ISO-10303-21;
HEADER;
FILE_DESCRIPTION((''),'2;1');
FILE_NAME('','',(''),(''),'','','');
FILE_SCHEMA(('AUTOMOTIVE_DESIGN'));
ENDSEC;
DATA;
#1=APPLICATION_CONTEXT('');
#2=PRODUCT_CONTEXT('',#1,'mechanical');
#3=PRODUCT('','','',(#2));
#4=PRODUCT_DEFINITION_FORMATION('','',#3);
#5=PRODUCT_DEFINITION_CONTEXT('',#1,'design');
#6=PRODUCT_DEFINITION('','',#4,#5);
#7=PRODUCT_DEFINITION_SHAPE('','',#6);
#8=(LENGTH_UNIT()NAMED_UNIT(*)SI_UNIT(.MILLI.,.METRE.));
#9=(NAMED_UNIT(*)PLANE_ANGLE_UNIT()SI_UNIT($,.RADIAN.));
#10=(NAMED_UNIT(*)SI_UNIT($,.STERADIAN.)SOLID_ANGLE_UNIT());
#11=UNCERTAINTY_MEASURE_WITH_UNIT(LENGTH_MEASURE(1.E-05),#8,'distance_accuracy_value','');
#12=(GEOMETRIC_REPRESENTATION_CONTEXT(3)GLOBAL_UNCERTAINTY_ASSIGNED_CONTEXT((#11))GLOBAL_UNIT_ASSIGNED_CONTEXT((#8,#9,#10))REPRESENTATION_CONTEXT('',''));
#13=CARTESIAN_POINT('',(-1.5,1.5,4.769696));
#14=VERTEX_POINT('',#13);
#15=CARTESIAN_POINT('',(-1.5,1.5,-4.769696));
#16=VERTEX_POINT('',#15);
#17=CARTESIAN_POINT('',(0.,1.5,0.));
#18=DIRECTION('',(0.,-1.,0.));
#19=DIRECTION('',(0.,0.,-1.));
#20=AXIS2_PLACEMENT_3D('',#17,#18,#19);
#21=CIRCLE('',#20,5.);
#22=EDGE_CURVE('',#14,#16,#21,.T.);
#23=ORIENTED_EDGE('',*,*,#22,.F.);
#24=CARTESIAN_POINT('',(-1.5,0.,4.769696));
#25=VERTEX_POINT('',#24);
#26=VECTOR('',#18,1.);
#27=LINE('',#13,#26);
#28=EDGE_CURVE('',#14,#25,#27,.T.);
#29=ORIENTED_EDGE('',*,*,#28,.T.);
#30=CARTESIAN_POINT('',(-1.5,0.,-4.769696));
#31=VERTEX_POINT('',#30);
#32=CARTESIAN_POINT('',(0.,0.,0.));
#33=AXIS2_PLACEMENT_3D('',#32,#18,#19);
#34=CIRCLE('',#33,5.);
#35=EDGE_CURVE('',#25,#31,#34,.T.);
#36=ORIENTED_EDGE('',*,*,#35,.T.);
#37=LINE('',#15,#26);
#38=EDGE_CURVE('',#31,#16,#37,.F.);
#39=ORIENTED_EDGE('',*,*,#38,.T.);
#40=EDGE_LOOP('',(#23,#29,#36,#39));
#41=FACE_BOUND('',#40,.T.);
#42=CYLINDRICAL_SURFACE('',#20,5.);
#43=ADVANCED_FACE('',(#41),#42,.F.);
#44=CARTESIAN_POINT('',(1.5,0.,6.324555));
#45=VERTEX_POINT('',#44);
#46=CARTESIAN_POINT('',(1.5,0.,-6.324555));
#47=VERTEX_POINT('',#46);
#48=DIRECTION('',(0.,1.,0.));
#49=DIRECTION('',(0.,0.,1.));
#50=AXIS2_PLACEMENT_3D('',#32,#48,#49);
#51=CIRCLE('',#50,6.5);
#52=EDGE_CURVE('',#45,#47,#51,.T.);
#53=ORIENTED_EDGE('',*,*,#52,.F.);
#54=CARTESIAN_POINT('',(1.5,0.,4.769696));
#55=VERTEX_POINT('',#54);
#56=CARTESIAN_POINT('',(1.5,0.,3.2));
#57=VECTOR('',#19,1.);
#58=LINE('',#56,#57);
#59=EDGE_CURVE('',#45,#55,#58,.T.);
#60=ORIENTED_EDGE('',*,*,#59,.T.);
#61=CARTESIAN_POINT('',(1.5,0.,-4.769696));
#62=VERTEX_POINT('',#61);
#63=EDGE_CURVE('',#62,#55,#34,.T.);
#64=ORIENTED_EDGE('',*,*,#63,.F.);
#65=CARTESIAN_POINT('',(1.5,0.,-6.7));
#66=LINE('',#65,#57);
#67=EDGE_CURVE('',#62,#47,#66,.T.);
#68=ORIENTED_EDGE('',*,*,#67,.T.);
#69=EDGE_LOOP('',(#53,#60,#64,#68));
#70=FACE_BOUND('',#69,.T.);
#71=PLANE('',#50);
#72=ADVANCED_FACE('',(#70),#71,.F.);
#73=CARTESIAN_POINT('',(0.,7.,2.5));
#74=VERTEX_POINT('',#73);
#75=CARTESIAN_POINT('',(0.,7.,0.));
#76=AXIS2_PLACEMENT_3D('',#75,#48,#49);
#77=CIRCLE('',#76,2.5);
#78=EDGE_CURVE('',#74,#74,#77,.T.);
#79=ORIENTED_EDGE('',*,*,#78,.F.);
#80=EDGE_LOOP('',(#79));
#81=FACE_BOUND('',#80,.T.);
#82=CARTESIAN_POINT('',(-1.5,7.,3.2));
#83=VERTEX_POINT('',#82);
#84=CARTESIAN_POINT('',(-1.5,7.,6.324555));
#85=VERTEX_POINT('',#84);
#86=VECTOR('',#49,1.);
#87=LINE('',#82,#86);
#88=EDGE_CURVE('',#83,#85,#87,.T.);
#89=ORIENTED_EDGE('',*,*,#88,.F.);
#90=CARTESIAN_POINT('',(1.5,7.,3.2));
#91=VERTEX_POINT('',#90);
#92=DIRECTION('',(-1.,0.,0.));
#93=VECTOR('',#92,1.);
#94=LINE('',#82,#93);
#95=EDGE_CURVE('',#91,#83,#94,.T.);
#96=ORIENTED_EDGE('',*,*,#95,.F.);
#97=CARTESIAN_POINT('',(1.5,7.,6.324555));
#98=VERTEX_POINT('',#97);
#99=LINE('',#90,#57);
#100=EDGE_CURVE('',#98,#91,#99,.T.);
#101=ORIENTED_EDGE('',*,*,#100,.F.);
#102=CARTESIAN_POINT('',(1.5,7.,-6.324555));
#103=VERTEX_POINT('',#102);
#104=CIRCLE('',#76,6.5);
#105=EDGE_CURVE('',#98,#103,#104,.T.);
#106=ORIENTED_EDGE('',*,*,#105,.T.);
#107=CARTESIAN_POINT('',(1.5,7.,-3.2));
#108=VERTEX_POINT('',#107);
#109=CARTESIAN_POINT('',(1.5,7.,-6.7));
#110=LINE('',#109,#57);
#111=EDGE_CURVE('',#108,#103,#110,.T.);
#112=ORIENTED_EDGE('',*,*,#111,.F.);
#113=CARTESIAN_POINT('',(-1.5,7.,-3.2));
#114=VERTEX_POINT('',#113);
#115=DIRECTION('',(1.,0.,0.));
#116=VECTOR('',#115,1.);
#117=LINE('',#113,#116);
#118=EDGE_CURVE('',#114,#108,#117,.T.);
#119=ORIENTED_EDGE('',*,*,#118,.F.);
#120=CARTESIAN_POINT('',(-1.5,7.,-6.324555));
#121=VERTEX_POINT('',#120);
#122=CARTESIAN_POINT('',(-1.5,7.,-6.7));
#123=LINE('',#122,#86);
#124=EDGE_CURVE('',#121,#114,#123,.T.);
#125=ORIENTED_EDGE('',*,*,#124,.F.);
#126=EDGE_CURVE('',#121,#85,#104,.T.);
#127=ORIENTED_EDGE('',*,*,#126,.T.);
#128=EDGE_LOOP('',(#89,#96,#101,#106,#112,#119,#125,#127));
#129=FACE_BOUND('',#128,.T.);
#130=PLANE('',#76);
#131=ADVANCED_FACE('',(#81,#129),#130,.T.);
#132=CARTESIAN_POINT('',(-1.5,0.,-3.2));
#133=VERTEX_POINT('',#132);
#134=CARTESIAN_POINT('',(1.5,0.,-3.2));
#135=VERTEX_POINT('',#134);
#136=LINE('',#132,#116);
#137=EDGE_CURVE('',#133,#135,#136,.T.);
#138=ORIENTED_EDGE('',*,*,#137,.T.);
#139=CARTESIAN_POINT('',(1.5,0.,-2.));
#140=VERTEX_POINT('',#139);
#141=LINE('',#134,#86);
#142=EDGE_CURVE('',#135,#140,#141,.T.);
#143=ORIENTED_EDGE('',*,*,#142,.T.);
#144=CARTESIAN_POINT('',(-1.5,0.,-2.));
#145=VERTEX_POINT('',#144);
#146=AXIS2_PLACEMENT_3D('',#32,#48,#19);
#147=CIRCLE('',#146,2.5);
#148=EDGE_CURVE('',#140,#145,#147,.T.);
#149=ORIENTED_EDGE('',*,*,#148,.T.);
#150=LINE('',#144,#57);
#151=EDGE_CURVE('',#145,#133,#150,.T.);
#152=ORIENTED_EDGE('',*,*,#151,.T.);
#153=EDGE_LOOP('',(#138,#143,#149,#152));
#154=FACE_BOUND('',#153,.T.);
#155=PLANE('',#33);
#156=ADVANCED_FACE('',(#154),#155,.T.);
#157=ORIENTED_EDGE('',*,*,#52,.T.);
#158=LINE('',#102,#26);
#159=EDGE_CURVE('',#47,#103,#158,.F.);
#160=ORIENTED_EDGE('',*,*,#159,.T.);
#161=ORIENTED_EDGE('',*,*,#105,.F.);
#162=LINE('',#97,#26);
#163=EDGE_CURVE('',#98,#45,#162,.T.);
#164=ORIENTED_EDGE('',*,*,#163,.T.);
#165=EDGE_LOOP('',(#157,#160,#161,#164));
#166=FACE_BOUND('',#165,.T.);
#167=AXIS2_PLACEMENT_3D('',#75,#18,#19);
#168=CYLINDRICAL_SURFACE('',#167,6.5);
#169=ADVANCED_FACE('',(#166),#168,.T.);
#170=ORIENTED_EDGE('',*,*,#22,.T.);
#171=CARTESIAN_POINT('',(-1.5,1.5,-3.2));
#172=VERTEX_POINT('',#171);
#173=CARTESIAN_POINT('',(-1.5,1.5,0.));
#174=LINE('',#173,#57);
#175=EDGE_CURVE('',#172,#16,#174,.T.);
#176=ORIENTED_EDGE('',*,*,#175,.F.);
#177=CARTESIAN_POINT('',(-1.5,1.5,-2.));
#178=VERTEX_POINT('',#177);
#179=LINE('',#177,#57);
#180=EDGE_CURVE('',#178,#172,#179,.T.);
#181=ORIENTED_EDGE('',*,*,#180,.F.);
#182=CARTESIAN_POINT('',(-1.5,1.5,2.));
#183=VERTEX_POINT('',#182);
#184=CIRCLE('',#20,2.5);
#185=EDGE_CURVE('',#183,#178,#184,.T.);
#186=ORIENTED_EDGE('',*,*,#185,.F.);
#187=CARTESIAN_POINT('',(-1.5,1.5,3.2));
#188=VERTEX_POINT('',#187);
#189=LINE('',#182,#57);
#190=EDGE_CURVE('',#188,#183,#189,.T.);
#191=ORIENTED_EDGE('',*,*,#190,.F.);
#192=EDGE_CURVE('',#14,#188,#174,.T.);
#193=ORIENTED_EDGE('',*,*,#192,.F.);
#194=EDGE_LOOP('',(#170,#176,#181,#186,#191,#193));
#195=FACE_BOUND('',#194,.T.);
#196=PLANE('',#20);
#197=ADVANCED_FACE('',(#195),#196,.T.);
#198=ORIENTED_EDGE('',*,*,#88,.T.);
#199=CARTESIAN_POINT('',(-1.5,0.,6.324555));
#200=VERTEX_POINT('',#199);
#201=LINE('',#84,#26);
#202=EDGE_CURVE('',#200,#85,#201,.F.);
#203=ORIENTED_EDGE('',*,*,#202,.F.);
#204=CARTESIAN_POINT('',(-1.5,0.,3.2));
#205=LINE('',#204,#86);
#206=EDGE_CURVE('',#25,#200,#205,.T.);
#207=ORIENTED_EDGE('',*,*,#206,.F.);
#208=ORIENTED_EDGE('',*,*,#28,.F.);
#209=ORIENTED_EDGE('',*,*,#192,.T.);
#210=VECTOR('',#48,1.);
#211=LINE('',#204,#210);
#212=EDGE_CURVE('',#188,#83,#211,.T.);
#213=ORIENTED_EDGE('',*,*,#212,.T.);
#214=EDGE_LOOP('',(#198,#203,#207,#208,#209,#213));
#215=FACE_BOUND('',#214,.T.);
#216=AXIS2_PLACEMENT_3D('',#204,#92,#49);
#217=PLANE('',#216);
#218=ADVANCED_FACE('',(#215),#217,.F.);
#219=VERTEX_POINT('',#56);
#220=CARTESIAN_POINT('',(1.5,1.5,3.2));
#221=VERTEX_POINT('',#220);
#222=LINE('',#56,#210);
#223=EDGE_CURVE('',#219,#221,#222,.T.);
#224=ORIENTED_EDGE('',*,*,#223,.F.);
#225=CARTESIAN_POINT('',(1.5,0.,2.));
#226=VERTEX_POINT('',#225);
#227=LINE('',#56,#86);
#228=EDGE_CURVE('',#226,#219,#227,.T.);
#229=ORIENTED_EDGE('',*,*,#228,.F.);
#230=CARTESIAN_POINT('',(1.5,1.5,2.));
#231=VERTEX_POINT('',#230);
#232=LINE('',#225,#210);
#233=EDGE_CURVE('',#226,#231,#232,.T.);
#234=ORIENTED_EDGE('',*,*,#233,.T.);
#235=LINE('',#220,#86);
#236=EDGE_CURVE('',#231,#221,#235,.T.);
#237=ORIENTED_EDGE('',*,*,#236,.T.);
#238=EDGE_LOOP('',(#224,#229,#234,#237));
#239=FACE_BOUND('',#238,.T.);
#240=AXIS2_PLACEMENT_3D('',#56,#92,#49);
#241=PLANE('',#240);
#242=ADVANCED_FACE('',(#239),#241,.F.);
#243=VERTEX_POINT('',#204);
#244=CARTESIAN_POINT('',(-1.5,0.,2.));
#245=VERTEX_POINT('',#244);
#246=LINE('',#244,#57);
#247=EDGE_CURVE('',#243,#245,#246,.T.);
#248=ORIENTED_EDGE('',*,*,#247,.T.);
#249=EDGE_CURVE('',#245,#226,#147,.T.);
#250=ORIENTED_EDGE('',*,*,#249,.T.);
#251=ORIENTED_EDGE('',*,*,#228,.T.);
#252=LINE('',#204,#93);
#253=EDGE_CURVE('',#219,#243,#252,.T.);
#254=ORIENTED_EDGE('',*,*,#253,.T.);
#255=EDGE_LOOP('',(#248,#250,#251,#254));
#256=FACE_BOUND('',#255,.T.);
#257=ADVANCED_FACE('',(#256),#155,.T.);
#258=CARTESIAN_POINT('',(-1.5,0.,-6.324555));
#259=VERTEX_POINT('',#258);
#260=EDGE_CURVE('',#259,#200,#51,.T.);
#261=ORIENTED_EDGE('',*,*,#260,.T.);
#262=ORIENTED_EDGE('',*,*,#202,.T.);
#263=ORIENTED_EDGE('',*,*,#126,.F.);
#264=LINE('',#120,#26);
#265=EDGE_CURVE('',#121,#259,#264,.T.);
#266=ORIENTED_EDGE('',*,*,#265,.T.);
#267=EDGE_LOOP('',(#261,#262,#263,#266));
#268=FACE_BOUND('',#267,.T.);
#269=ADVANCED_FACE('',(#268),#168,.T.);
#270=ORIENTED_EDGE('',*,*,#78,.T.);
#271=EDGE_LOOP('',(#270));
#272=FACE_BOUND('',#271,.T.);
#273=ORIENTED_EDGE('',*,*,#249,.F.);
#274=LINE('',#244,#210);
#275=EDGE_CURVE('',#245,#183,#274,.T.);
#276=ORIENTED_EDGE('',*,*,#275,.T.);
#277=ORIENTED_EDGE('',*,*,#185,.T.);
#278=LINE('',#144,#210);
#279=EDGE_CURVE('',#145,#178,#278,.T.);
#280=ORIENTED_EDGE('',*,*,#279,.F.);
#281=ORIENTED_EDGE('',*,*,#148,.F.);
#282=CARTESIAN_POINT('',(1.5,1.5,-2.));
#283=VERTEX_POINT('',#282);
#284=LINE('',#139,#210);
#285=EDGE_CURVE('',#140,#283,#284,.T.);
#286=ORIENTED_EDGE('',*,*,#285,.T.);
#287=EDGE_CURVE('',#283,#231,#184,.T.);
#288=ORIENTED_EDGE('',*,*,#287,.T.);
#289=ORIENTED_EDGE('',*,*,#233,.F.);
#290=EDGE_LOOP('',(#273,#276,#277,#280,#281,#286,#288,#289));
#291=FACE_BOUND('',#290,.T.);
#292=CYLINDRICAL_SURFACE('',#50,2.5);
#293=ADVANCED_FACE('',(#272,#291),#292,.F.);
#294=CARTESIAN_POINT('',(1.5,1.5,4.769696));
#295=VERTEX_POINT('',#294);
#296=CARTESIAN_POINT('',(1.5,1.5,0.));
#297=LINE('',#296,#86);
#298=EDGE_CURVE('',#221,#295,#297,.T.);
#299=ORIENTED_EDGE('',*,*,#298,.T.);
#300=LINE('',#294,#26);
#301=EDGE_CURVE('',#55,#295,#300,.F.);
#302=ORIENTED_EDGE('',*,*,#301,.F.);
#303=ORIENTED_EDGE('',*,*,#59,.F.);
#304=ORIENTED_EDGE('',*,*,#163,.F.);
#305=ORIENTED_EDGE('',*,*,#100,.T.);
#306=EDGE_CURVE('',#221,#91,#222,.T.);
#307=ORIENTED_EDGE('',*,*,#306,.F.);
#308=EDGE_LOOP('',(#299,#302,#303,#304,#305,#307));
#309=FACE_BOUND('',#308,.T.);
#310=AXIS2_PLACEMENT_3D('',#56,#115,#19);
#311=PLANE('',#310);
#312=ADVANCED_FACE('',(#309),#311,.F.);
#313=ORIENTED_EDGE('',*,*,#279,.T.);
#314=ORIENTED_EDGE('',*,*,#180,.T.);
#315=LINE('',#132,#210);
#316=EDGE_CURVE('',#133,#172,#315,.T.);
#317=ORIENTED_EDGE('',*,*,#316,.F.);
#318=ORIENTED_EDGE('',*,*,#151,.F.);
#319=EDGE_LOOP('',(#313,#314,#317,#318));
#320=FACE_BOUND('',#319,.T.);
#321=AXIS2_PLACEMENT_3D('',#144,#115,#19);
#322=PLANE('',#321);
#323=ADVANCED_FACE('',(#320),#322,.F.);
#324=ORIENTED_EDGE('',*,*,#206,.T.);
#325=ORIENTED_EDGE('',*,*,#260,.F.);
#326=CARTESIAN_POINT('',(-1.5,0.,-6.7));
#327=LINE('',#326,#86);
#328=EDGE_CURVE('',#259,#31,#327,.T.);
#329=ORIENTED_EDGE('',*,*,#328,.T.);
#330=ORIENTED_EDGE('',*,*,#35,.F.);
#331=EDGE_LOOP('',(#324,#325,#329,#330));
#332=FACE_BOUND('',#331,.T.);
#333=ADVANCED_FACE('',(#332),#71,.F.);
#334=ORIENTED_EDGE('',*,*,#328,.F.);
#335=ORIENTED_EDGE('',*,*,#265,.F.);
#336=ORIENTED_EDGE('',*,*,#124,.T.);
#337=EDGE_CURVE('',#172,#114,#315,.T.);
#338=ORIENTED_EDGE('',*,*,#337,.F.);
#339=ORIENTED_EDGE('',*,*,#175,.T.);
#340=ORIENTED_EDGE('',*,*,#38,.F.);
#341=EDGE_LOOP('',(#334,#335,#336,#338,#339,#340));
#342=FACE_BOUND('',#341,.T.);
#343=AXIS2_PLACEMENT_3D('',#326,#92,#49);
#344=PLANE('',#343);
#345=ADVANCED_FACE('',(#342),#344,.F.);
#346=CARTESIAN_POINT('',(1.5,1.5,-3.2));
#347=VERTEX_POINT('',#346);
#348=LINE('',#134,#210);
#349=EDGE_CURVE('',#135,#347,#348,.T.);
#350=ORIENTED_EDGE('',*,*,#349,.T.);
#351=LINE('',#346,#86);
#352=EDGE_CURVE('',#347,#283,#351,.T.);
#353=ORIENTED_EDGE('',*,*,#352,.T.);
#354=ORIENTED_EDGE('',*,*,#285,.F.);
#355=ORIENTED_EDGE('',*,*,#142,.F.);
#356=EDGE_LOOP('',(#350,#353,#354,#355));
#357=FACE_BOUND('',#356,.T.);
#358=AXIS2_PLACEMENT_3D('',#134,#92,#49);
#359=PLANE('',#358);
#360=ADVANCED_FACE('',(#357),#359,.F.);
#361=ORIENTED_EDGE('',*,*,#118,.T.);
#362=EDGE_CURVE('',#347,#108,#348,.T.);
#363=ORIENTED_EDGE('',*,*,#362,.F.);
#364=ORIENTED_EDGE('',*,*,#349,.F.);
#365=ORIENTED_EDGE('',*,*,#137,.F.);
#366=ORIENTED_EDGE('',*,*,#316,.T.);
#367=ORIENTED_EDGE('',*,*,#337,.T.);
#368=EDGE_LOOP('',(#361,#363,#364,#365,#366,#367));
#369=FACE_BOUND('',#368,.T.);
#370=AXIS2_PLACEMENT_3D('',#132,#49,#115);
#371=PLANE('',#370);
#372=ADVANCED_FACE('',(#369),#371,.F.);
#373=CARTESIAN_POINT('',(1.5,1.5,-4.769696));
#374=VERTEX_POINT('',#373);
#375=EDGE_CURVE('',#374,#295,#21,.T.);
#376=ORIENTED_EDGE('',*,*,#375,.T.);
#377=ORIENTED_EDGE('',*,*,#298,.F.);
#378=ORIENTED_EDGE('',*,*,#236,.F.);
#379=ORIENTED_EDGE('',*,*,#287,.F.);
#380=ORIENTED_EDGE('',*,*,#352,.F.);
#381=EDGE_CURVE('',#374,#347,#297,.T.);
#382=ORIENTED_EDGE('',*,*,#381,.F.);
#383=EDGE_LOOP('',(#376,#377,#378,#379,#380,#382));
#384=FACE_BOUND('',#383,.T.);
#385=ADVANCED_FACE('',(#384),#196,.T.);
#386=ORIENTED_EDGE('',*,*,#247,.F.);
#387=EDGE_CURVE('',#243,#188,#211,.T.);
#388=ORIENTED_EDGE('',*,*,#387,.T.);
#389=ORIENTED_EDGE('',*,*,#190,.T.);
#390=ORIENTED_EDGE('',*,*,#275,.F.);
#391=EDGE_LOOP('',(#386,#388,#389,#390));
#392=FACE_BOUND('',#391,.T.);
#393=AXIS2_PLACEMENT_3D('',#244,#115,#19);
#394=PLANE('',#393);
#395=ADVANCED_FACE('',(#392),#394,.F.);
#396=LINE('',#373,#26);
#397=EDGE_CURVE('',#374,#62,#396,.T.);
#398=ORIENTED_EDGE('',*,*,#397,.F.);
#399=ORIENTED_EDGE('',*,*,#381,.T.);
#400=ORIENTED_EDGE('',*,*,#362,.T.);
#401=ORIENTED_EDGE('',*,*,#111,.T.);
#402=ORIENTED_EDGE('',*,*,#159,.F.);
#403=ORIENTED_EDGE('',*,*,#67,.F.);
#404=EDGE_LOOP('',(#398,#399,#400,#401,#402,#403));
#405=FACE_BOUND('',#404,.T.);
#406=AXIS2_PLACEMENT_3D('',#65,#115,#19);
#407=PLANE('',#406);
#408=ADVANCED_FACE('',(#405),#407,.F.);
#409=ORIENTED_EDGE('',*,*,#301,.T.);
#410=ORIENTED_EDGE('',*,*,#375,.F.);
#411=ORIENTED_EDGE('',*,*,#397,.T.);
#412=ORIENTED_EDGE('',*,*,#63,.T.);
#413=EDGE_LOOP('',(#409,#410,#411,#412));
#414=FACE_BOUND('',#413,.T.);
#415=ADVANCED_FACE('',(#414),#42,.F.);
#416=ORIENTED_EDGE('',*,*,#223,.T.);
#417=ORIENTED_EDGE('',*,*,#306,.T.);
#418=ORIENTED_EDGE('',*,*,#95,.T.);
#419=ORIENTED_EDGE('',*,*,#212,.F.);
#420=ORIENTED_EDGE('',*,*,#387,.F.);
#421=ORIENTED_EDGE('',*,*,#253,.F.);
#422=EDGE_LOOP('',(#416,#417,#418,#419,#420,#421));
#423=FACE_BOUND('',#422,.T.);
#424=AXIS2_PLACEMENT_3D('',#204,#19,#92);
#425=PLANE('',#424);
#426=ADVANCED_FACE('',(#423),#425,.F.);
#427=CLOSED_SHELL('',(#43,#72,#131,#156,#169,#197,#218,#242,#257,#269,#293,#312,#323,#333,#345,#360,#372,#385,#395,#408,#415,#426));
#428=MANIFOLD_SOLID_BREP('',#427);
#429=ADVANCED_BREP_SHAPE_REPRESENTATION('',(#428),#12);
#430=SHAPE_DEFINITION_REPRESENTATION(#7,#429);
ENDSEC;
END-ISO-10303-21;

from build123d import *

# Parameters (mm, degrees)
SKETCH1_R           = 6.5
BOSS_EXTRUDE1_DEPTH = 7
SKETCH2_R           = 5
CUT_EXTRUDE1_DEPTH  = 1.5
SKETCH3_R           = 2.5
SKETCH3_W           = 3
SKETCH3_H           = 3.5
CUT_EXTRUDE2_DEPTH  = 12.554220008
BOSS_EXTRUDE2_DEPTH = 1.5


with BuildPart() as part:
    # Sketch1 → Boss-Extrude1 (new body)
    with BuildSketch(Plane(origin=(0, 0, 0), x_dir=(1, 0, 0), z_dir=(0, 1, 0))):
        Circle(SKETCH1_R)
    extrude(amount=BOSS_EXTRUDE1_DEPTH)

    # Sketch2 → Cut-Extrude1 (cut)
    with BuildSketch(Plane.XZ):
        Circle(SKETCH2_R)
    extrude(amount=-CUT_EXTRUDE1_DEPTH, mode=Mode.SUBTRACT)

    # Sketch3 → Cut-Extrude2 (cut, through all)
    with BuildSketch(Plane(origin=(0, 7, 0), x_dir=(1, 0, 0), z_dir=(0, 1, 0))):
        Circle(SKETCH3_R)
        with Locations((0, 4.95)):
            Rectangle(SKETCH3_W, SKETCH3_H)
        with Locations((0, -4.95)):
            Rectangle(SKETCH3_W, SKETCH3_H)
    extrude(amount=-CUT_EXTRUDE2_DEPTH, mode=Mode.SUBTRACT)

    # Sketch4 → Boss-Extrude2 (add)
    with BuildSketch(Plane.XZ.offset(-1.5)):
        with BuildLine():
            Line((-1.5, 2), (-1.5, 3.2))
            Line((-1.5, 3.2), (1.5, 3.2))
            Line((1.5, 3.2), (1.5, 2))
            ThreePointArc((1.5, 2), (0, 2.5), (-1.5, 2))
        make_face()
        with BuildLine():
            Line((-1.5, -2), (-1.5, -3.2))
            Line((-1.5, -3.2), (1.5, -3.2))
            Line((1.5, -3.2), (1.5, -2))
            ThreePointArc((1.5, -2), (0, -2.5), (-1.5, -2))
        make_face()
    extrude(amount=BOSS_EXTRUDE2_DEPTH)


solid = part.part
